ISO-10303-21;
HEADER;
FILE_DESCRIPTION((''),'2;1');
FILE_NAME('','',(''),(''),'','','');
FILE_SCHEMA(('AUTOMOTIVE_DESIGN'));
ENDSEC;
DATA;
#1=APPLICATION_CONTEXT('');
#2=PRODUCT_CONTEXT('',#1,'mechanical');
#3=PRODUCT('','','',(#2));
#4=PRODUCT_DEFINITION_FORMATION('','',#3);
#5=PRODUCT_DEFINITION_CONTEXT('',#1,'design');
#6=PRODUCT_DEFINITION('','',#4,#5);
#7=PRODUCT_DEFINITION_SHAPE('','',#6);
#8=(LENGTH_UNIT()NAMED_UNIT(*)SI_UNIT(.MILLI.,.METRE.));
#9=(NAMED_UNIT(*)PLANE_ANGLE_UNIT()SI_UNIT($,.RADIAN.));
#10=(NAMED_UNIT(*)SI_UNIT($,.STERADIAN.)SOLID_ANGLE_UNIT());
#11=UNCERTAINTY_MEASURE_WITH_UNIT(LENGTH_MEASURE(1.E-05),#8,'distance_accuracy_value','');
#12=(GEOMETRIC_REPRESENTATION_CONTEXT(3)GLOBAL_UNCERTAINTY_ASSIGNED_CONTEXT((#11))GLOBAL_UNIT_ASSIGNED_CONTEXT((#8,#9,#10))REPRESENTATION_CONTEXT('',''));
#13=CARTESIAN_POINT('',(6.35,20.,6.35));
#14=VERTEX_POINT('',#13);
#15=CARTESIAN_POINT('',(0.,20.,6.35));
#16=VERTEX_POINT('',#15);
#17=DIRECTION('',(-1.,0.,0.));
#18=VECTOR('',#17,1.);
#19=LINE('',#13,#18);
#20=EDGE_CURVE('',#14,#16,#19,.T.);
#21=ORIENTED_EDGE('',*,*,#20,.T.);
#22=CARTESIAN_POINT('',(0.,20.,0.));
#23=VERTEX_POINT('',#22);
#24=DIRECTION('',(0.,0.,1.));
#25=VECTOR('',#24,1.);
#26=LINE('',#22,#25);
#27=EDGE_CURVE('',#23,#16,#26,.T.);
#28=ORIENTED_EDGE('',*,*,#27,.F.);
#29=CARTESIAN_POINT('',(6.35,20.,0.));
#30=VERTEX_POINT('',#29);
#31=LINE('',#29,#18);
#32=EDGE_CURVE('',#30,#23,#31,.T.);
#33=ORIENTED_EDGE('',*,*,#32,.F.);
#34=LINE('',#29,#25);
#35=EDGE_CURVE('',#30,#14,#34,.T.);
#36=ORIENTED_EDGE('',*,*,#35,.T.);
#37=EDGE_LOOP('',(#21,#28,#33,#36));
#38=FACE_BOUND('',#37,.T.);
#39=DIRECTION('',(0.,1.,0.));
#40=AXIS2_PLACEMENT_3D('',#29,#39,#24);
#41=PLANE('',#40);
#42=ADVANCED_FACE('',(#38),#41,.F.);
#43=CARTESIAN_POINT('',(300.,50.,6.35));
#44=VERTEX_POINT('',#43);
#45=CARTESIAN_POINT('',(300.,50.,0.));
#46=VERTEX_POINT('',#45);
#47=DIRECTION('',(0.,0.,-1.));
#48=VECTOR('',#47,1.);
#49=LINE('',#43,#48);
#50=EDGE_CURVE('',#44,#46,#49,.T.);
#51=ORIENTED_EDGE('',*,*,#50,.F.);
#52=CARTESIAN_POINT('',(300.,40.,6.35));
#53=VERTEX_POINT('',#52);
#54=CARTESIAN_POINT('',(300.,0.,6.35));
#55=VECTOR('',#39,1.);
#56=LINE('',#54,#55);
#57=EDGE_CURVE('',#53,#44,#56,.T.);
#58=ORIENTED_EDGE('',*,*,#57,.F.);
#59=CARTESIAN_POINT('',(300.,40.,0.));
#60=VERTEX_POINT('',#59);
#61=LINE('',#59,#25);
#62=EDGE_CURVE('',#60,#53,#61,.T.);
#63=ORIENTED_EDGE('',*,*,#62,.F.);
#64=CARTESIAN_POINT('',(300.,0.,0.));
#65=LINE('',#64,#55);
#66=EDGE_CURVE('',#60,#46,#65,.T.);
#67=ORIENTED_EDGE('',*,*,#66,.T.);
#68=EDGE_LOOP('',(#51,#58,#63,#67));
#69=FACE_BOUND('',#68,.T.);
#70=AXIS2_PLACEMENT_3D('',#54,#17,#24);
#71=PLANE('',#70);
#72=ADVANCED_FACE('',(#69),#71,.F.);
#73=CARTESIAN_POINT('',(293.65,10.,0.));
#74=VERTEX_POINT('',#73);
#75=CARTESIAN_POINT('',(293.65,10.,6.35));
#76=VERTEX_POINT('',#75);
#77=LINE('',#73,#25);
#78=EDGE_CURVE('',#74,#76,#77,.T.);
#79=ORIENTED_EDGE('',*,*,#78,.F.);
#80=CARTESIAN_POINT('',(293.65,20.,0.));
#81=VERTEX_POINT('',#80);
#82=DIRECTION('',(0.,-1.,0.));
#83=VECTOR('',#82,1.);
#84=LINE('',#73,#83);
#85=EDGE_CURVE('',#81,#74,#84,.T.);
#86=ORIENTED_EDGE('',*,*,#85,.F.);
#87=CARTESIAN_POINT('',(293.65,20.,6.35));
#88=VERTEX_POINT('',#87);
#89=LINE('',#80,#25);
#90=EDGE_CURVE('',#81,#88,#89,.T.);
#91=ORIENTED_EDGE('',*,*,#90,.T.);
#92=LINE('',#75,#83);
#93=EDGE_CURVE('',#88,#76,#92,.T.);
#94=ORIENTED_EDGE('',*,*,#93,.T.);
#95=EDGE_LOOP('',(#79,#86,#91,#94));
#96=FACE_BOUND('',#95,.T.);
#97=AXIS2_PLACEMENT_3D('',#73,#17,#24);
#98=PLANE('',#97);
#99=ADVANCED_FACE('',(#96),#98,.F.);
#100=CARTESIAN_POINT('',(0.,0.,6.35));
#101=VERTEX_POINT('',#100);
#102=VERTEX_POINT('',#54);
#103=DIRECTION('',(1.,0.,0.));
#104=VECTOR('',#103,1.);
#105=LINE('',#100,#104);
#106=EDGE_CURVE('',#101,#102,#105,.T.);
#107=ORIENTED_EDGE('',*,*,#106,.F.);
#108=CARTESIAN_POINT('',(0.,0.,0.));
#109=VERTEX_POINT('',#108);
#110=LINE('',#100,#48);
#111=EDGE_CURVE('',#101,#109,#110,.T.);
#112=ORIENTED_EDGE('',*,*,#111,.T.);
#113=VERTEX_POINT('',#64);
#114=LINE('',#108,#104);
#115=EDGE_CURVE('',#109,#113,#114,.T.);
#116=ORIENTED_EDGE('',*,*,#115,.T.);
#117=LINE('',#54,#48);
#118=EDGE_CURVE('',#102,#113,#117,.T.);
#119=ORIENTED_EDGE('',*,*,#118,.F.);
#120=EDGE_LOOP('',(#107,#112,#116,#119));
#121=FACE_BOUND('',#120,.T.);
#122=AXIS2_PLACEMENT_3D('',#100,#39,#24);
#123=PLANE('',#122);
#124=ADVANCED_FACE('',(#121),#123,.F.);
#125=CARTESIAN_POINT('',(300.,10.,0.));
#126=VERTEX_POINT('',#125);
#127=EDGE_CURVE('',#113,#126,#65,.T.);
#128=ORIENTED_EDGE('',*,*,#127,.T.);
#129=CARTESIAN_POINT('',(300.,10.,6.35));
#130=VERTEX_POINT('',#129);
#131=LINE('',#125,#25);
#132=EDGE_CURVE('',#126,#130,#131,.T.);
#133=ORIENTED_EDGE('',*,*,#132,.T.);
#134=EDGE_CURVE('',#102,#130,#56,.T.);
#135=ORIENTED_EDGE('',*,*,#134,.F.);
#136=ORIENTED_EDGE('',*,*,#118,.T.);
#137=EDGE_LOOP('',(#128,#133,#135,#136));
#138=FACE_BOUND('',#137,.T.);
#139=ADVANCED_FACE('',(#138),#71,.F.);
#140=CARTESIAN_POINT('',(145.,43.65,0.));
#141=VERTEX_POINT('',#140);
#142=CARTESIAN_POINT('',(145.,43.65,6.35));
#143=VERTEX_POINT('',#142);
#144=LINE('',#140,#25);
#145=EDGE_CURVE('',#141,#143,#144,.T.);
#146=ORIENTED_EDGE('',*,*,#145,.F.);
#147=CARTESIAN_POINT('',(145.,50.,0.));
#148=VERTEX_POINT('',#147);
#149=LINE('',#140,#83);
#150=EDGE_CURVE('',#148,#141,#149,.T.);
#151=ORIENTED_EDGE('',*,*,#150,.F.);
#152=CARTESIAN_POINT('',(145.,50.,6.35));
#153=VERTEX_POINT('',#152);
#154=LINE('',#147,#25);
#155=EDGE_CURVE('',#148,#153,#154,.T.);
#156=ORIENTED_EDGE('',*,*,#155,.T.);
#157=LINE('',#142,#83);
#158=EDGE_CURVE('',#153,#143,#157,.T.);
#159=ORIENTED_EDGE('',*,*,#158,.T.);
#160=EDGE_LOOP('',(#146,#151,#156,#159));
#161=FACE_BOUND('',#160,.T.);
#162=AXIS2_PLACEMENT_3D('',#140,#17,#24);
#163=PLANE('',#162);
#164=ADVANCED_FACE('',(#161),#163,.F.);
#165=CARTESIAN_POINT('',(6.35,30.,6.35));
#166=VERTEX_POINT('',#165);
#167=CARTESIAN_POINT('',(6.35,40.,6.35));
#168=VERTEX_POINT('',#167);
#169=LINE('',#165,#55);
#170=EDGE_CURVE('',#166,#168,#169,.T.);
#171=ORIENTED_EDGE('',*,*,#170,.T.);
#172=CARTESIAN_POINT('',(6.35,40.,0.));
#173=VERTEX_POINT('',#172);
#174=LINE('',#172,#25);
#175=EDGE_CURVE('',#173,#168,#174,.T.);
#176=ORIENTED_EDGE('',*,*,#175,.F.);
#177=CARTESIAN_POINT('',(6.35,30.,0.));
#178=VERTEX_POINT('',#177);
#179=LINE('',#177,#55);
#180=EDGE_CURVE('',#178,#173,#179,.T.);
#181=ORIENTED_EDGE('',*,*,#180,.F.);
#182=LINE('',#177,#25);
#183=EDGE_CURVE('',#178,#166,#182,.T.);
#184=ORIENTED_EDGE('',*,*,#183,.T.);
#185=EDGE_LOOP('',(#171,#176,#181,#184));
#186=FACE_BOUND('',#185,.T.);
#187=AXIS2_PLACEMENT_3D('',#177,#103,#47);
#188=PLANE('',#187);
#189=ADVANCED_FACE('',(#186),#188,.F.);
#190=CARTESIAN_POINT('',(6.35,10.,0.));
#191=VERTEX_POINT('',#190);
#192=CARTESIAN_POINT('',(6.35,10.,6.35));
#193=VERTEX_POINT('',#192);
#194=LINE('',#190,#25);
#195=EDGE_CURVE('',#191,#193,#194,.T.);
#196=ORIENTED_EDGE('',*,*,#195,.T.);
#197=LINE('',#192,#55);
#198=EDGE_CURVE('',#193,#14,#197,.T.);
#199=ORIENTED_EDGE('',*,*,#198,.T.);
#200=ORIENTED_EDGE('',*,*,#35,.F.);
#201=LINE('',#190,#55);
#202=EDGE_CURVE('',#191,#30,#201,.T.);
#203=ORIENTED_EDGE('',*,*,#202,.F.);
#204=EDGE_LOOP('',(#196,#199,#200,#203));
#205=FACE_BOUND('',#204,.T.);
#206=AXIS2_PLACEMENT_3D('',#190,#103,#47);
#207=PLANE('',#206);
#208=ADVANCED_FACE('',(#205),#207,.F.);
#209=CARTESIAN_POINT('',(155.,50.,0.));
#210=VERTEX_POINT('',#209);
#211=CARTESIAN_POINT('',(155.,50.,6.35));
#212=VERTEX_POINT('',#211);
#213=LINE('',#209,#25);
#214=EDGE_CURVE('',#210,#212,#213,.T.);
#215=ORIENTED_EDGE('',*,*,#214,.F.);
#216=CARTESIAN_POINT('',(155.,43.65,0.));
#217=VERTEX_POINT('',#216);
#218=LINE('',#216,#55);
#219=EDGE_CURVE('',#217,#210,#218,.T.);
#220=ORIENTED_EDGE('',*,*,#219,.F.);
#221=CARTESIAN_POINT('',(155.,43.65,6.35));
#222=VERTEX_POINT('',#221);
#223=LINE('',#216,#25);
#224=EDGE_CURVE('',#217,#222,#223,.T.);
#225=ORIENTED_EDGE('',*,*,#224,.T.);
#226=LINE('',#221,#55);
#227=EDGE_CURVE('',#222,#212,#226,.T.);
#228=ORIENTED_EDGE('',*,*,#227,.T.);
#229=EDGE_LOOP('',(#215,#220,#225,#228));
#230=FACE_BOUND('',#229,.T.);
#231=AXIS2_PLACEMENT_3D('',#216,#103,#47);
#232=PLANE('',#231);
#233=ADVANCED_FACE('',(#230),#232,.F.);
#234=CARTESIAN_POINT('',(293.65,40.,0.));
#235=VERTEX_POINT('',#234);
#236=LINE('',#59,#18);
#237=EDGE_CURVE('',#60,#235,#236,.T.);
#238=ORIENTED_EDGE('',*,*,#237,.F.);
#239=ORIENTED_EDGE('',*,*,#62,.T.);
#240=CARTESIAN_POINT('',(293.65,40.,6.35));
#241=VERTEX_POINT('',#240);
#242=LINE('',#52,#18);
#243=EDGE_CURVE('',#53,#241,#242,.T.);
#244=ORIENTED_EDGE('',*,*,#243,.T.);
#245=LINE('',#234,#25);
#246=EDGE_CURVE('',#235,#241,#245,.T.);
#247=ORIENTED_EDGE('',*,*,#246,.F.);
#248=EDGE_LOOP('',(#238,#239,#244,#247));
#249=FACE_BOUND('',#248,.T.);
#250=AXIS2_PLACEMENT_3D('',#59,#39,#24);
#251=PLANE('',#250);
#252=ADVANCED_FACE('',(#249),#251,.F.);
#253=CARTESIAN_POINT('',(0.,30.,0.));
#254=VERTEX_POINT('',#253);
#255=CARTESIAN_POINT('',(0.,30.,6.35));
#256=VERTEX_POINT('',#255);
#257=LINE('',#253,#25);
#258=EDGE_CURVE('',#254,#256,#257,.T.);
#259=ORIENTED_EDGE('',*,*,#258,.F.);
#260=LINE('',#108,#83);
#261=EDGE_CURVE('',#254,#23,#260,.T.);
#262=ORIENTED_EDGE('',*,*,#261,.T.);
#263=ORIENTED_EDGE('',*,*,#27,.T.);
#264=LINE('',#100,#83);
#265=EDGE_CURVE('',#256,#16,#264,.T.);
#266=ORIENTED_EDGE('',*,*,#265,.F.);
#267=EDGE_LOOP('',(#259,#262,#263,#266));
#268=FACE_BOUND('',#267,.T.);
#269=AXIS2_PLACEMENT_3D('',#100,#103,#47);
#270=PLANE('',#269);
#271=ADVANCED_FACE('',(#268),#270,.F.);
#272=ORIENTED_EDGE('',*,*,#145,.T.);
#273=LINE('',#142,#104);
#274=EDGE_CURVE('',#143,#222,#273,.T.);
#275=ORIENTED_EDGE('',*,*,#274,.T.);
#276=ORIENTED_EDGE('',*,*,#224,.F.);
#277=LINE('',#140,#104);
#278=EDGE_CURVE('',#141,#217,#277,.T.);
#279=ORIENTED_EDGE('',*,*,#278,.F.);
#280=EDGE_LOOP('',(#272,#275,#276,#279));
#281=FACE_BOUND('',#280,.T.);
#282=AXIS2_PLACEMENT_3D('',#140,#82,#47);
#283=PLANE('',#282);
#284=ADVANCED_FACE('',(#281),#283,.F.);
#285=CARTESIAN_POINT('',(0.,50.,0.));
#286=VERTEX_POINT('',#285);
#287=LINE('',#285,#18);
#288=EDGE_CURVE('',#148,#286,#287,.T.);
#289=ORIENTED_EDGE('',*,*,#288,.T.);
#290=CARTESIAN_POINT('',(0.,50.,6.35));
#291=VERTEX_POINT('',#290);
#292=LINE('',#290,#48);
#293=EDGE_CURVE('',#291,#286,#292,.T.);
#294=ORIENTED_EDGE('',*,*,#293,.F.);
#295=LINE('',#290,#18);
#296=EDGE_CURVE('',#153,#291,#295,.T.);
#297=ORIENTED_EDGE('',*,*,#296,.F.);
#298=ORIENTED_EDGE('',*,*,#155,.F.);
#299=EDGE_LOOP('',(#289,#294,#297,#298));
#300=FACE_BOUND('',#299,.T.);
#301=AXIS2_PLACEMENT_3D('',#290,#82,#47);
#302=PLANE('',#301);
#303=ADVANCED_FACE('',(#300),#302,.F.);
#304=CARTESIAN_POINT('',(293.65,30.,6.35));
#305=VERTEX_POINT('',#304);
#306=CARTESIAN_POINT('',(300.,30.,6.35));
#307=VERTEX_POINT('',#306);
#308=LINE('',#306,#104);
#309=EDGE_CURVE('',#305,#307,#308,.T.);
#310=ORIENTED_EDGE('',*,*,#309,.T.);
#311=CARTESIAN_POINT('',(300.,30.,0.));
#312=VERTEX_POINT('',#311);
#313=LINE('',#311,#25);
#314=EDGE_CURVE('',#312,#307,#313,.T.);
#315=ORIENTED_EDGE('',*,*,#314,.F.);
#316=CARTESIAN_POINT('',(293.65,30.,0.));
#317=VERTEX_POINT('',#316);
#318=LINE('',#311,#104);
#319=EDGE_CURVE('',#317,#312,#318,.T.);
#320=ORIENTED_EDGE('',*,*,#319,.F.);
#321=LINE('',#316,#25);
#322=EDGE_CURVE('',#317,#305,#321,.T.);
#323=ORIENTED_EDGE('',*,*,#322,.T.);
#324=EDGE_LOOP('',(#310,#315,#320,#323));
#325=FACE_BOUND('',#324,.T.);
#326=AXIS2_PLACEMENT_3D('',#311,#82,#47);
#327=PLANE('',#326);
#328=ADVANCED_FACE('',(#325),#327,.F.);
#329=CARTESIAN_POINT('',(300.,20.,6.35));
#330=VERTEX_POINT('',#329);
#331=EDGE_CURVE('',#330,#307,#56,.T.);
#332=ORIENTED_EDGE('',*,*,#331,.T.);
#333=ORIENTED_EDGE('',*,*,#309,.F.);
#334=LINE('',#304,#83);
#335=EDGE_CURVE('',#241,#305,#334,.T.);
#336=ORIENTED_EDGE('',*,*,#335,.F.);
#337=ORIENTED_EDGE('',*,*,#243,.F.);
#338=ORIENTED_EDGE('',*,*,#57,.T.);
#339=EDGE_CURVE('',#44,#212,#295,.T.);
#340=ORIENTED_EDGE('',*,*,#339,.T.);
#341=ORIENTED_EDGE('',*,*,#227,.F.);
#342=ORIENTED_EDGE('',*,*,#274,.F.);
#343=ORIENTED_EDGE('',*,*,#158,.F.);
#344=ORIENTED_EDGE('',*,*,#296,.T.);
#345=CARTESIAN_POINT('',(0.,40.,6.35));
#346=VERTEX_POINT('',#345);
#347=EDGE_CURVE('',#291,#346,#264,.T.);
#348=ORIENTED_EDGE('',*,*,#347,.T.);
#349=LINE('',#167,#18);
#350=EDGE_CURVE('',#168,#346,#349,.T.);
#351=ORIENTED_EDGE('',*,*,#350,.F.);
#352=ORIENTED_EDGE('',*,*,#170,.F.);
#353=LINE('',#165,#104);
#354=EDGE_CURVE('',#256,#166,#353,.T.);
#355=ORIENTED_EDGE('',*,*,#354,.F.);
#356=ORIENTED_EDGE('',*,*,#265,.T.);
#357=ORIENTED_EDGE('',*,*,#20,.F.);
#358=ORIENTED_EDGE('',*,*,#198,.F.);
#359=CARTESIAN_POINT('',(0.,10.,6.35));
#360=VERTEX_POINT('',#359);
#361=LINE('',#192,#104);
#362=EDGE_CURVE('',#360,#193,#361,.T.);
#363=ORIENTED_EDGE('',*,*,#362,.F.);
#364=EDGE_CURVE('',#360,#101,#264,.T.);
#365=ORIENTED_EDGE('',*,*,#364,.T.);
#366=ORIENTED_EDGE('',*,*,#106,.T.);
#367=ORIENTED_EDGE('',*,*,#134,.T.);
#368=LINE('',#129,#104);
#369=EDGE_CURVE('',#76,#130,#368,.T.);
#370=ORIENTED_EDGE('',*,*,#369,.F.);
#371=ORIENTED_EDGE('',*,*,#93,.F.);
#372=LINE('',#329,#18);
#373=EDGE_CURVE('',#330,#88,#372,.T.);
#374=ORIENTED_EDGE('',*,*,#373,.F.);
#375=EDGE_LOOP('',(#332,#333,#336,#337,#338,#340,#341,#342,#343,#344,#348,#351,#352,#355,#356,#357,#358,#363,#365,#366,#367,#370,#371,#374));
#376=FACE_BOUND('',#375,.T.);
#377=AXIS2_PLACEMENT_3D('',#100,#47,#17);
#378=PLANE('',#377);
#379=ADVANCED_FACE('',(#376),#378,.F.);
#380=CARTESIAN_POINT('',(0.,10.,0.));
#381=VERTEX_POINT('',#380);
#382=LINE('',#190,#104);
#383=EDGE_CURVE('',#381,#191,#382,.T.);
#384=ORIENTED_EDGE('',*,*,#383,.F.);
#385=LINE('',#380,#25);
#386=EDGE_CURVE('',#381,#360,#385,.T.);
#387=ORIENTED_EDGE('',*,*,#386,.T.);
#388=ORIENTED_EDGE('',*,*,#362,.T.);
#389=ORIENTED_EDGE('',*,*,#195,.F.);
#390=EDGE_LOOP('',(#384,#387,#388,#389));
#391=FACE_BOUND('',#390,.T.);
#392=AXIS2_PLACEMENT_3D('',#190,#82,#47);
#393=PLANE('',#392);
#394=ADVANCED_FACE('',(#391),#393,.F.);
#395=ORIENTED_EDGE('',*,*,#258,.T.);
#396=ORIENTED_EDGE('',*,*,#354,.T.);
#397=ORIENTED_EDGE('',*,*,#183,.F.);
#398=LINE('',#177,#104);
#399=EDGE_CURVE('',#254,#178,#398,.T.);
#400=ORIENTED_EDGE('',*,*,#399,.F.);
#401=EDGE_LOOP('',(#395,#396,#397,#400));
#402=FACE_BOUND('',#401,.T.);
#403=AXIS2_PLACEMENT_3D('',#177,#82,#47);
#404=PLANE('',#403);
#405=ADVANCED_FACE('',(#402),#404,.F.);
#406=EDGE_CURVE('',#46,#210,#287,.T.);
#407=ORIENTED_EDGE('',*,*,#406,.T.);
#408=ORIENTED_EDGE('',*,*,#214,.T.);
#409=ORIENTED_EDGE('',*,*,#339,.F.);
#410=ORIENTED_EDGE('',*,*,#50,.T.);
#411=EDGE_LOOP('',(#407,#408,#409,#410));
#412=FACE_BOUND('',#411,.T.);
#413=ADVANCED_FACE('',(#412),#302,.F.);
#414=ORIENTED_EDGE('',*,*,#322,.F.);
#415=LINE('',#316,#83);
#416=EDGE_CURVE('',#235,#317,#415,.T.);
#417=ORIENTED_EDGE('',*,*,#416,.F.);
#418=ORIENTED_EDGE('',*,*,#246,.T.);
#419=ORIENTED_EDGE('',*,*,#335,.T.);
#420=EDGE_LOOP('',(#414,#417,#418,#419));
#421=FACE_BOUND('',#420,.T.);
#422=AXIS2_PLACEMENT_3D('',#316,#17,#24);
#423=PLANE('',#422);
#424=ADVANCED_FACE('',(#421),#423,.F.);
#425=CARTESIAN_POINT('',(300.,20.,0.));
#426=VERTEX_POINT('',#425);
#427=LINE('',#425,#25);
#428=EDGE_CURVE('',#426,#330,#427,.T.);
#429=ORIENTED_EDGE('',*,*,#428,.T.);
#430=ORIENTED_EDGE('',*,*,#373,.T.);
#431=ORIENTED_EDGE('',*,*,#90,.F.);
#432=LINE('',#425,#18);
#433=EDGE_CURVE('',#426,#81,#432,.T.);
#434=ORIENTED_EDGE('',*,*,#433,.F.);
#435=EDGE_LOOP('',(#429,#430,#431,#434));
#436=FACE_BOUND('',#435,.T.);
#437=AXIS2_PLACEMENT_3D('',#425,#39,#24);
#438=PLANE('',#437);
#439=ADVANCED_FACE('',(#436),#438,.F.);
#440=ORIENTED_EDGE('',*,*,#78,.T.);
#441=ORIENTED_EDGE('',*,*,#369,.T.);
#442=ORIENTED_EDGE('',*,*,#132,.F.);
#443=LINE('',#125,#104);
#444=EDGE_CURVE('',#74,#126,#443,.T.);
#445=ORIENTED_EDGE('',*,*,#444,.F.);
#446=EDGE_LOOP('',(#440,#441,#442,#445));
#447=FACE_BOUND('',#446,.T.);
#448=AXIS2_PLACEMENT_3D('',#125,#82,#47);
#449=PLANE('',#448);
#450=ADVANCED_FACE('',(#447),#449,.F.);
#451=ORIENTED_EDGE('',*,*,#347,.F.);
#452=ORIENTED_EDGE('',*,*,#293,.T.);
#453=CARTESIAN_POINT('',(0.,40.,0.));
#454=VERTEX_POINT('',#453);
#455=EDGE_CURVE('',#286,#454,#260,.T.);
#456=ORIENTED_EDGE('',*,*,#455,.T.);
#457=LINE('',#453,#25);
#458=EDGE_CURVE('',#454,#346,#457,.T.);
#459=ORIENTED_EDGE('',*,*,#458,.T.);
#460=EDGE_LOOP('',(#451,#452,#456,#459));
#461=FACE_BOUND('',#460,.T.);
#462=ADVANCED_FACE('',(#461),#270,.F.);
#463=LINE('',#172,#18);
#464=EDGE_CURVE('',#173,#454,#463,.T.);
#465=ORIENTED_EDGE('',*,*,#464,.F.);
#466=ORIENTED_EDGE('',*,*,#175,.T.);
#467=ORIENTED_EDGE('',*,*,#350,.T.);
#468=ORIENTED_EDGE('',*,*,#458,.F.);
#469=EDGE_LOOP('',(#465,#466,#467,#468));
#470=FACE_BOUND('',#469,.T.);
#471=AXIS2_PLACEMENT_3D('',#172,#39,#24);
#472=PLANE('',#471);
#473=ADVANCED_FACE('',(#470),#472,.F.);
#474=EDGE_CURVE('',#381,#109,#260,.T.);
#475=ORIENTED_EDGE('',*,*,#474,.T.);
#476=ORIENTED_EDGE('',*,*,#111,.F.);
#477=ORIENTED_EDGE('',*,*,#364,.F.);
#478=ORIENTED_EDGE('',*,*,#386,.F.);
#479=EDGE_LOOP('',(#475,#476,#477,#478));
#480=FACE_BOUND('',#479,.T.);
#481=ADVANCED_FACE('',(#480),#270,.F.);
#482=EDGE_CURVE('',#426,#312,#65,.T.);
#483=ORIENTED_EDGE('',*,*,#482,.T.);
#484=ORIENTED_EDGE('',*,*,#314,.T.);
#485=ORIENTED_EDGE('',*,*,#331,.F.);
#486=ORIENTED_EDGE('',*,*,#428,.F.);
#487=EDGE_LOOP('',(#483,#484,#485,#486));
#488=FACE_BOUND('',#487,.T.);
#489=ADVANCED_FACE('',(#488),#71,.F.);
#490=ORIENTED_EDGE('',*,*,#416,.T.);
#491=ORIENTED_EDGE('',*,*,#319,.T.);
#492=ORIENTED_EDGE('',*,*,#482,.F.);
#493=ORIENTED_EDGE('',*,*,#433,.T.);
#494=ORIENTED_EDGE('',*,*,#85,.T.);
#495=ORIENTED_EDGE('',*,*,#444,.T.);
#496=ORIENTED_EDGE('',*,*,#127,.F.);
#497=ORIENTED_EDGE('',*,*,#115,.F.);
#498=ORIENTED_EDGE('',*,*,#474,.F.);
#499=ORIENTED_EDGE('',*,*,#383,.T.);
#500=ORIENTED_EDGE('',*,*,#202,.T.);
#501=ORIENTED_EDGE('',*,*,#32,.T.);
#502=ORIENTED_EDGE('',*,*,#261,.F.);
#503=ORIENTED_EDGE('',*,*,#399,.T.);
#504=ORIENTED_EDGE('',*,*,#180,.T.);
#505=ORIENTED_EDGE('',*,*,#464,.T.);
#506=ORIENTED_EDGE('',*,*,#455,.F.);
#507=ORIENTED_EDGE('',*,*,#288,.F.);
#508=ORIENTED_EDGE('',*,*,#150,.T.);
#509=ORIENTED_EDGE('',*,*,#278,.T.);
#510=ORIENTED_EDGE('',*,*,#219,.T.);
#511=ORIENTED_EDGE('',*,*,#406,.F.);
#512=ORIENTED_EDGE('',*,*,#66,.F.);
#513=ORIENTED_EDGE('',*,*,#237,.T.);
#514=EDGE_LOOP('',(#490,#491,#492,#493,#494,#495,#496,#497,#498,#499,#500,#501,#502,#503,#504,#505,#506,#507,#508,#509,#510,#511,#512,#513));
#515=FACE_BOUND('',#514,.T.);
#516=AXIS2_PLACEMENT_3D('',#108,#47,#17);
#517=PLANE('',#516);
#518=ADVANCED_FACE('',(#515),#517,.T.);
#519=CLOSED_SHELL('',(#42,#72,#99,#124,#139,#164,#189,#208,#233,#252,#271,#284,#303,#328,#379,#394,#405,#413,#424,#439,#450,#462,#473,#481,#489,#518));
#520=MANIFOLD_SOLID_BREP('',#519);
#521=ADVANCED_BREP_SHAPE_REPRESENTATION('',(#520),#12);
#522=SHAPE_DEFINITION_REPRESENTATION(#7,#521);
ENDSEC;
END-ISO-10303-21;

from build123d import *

# Parameters (mm, degrees)
BOSS_EXTRUDE1_OUTLINE_W = 50
BOSS_EXTRUDE1_OUTLINE_H = 6.35
BOSS_EXTRUDE1_DEPTH     = 300
SKETCH1_W               = 10
SKETCH1_H               = 6.35
F_250_TOOTH_DEPTH       = 305.204409074
SKETCH5_W               = 6.35
SKETCH5_H               = 10
F_3T_CUT_DEPTH          = 305.204409074


# Read off the part's stored shape, not the designer's step: Boss-Extrude1
with BuildPart() as part:
    # Boss-Extrude1 outline → Boss-Extrude1 (new body)
    with BuildSketch(Plane.YZ):
        with Locations((25, 3.175)):
            Rectangle(BOSS_EXTRUDE1_OUTLINE_W, BOSS_EXTRUDE1_OUTLINE_H)
    extrude(amount=BOSS_EXTRUDE1_DEPTH)

    # Sketch1 → 250-tooth (cut, through all)
    with BuildSketch(Plane.XY.offset(6.35)):
        with Locations((150, 46.825)):
            Rectangle(SKETCH1_W, SKETCH1_H)
    extrude(amount=-F_250_TOOTH_DEPTH, mode=Mode.SUBTRACT)

    # Sketch5 → 3t_cut (cut, through all)
    with BuildSketch(Plane.XY.offset(6.35)):
        with Locations((3.175, 35)):
            Rectangle(SKETCH5_W, SKETCH5_H)
    f_3t_cut = extrude(amount=-F_3T_CUT_DEPTH, mode=Mode.SUBTRACT)

    # 3t_pattern: 3t_cut at 3 more places
    with Locations((0, -20, 0), (293.65, 0, 0), (293.65, -20, 0)):
        add(f_3t_cut, mode=Mode.SUBTRACT)


solid = part.part
